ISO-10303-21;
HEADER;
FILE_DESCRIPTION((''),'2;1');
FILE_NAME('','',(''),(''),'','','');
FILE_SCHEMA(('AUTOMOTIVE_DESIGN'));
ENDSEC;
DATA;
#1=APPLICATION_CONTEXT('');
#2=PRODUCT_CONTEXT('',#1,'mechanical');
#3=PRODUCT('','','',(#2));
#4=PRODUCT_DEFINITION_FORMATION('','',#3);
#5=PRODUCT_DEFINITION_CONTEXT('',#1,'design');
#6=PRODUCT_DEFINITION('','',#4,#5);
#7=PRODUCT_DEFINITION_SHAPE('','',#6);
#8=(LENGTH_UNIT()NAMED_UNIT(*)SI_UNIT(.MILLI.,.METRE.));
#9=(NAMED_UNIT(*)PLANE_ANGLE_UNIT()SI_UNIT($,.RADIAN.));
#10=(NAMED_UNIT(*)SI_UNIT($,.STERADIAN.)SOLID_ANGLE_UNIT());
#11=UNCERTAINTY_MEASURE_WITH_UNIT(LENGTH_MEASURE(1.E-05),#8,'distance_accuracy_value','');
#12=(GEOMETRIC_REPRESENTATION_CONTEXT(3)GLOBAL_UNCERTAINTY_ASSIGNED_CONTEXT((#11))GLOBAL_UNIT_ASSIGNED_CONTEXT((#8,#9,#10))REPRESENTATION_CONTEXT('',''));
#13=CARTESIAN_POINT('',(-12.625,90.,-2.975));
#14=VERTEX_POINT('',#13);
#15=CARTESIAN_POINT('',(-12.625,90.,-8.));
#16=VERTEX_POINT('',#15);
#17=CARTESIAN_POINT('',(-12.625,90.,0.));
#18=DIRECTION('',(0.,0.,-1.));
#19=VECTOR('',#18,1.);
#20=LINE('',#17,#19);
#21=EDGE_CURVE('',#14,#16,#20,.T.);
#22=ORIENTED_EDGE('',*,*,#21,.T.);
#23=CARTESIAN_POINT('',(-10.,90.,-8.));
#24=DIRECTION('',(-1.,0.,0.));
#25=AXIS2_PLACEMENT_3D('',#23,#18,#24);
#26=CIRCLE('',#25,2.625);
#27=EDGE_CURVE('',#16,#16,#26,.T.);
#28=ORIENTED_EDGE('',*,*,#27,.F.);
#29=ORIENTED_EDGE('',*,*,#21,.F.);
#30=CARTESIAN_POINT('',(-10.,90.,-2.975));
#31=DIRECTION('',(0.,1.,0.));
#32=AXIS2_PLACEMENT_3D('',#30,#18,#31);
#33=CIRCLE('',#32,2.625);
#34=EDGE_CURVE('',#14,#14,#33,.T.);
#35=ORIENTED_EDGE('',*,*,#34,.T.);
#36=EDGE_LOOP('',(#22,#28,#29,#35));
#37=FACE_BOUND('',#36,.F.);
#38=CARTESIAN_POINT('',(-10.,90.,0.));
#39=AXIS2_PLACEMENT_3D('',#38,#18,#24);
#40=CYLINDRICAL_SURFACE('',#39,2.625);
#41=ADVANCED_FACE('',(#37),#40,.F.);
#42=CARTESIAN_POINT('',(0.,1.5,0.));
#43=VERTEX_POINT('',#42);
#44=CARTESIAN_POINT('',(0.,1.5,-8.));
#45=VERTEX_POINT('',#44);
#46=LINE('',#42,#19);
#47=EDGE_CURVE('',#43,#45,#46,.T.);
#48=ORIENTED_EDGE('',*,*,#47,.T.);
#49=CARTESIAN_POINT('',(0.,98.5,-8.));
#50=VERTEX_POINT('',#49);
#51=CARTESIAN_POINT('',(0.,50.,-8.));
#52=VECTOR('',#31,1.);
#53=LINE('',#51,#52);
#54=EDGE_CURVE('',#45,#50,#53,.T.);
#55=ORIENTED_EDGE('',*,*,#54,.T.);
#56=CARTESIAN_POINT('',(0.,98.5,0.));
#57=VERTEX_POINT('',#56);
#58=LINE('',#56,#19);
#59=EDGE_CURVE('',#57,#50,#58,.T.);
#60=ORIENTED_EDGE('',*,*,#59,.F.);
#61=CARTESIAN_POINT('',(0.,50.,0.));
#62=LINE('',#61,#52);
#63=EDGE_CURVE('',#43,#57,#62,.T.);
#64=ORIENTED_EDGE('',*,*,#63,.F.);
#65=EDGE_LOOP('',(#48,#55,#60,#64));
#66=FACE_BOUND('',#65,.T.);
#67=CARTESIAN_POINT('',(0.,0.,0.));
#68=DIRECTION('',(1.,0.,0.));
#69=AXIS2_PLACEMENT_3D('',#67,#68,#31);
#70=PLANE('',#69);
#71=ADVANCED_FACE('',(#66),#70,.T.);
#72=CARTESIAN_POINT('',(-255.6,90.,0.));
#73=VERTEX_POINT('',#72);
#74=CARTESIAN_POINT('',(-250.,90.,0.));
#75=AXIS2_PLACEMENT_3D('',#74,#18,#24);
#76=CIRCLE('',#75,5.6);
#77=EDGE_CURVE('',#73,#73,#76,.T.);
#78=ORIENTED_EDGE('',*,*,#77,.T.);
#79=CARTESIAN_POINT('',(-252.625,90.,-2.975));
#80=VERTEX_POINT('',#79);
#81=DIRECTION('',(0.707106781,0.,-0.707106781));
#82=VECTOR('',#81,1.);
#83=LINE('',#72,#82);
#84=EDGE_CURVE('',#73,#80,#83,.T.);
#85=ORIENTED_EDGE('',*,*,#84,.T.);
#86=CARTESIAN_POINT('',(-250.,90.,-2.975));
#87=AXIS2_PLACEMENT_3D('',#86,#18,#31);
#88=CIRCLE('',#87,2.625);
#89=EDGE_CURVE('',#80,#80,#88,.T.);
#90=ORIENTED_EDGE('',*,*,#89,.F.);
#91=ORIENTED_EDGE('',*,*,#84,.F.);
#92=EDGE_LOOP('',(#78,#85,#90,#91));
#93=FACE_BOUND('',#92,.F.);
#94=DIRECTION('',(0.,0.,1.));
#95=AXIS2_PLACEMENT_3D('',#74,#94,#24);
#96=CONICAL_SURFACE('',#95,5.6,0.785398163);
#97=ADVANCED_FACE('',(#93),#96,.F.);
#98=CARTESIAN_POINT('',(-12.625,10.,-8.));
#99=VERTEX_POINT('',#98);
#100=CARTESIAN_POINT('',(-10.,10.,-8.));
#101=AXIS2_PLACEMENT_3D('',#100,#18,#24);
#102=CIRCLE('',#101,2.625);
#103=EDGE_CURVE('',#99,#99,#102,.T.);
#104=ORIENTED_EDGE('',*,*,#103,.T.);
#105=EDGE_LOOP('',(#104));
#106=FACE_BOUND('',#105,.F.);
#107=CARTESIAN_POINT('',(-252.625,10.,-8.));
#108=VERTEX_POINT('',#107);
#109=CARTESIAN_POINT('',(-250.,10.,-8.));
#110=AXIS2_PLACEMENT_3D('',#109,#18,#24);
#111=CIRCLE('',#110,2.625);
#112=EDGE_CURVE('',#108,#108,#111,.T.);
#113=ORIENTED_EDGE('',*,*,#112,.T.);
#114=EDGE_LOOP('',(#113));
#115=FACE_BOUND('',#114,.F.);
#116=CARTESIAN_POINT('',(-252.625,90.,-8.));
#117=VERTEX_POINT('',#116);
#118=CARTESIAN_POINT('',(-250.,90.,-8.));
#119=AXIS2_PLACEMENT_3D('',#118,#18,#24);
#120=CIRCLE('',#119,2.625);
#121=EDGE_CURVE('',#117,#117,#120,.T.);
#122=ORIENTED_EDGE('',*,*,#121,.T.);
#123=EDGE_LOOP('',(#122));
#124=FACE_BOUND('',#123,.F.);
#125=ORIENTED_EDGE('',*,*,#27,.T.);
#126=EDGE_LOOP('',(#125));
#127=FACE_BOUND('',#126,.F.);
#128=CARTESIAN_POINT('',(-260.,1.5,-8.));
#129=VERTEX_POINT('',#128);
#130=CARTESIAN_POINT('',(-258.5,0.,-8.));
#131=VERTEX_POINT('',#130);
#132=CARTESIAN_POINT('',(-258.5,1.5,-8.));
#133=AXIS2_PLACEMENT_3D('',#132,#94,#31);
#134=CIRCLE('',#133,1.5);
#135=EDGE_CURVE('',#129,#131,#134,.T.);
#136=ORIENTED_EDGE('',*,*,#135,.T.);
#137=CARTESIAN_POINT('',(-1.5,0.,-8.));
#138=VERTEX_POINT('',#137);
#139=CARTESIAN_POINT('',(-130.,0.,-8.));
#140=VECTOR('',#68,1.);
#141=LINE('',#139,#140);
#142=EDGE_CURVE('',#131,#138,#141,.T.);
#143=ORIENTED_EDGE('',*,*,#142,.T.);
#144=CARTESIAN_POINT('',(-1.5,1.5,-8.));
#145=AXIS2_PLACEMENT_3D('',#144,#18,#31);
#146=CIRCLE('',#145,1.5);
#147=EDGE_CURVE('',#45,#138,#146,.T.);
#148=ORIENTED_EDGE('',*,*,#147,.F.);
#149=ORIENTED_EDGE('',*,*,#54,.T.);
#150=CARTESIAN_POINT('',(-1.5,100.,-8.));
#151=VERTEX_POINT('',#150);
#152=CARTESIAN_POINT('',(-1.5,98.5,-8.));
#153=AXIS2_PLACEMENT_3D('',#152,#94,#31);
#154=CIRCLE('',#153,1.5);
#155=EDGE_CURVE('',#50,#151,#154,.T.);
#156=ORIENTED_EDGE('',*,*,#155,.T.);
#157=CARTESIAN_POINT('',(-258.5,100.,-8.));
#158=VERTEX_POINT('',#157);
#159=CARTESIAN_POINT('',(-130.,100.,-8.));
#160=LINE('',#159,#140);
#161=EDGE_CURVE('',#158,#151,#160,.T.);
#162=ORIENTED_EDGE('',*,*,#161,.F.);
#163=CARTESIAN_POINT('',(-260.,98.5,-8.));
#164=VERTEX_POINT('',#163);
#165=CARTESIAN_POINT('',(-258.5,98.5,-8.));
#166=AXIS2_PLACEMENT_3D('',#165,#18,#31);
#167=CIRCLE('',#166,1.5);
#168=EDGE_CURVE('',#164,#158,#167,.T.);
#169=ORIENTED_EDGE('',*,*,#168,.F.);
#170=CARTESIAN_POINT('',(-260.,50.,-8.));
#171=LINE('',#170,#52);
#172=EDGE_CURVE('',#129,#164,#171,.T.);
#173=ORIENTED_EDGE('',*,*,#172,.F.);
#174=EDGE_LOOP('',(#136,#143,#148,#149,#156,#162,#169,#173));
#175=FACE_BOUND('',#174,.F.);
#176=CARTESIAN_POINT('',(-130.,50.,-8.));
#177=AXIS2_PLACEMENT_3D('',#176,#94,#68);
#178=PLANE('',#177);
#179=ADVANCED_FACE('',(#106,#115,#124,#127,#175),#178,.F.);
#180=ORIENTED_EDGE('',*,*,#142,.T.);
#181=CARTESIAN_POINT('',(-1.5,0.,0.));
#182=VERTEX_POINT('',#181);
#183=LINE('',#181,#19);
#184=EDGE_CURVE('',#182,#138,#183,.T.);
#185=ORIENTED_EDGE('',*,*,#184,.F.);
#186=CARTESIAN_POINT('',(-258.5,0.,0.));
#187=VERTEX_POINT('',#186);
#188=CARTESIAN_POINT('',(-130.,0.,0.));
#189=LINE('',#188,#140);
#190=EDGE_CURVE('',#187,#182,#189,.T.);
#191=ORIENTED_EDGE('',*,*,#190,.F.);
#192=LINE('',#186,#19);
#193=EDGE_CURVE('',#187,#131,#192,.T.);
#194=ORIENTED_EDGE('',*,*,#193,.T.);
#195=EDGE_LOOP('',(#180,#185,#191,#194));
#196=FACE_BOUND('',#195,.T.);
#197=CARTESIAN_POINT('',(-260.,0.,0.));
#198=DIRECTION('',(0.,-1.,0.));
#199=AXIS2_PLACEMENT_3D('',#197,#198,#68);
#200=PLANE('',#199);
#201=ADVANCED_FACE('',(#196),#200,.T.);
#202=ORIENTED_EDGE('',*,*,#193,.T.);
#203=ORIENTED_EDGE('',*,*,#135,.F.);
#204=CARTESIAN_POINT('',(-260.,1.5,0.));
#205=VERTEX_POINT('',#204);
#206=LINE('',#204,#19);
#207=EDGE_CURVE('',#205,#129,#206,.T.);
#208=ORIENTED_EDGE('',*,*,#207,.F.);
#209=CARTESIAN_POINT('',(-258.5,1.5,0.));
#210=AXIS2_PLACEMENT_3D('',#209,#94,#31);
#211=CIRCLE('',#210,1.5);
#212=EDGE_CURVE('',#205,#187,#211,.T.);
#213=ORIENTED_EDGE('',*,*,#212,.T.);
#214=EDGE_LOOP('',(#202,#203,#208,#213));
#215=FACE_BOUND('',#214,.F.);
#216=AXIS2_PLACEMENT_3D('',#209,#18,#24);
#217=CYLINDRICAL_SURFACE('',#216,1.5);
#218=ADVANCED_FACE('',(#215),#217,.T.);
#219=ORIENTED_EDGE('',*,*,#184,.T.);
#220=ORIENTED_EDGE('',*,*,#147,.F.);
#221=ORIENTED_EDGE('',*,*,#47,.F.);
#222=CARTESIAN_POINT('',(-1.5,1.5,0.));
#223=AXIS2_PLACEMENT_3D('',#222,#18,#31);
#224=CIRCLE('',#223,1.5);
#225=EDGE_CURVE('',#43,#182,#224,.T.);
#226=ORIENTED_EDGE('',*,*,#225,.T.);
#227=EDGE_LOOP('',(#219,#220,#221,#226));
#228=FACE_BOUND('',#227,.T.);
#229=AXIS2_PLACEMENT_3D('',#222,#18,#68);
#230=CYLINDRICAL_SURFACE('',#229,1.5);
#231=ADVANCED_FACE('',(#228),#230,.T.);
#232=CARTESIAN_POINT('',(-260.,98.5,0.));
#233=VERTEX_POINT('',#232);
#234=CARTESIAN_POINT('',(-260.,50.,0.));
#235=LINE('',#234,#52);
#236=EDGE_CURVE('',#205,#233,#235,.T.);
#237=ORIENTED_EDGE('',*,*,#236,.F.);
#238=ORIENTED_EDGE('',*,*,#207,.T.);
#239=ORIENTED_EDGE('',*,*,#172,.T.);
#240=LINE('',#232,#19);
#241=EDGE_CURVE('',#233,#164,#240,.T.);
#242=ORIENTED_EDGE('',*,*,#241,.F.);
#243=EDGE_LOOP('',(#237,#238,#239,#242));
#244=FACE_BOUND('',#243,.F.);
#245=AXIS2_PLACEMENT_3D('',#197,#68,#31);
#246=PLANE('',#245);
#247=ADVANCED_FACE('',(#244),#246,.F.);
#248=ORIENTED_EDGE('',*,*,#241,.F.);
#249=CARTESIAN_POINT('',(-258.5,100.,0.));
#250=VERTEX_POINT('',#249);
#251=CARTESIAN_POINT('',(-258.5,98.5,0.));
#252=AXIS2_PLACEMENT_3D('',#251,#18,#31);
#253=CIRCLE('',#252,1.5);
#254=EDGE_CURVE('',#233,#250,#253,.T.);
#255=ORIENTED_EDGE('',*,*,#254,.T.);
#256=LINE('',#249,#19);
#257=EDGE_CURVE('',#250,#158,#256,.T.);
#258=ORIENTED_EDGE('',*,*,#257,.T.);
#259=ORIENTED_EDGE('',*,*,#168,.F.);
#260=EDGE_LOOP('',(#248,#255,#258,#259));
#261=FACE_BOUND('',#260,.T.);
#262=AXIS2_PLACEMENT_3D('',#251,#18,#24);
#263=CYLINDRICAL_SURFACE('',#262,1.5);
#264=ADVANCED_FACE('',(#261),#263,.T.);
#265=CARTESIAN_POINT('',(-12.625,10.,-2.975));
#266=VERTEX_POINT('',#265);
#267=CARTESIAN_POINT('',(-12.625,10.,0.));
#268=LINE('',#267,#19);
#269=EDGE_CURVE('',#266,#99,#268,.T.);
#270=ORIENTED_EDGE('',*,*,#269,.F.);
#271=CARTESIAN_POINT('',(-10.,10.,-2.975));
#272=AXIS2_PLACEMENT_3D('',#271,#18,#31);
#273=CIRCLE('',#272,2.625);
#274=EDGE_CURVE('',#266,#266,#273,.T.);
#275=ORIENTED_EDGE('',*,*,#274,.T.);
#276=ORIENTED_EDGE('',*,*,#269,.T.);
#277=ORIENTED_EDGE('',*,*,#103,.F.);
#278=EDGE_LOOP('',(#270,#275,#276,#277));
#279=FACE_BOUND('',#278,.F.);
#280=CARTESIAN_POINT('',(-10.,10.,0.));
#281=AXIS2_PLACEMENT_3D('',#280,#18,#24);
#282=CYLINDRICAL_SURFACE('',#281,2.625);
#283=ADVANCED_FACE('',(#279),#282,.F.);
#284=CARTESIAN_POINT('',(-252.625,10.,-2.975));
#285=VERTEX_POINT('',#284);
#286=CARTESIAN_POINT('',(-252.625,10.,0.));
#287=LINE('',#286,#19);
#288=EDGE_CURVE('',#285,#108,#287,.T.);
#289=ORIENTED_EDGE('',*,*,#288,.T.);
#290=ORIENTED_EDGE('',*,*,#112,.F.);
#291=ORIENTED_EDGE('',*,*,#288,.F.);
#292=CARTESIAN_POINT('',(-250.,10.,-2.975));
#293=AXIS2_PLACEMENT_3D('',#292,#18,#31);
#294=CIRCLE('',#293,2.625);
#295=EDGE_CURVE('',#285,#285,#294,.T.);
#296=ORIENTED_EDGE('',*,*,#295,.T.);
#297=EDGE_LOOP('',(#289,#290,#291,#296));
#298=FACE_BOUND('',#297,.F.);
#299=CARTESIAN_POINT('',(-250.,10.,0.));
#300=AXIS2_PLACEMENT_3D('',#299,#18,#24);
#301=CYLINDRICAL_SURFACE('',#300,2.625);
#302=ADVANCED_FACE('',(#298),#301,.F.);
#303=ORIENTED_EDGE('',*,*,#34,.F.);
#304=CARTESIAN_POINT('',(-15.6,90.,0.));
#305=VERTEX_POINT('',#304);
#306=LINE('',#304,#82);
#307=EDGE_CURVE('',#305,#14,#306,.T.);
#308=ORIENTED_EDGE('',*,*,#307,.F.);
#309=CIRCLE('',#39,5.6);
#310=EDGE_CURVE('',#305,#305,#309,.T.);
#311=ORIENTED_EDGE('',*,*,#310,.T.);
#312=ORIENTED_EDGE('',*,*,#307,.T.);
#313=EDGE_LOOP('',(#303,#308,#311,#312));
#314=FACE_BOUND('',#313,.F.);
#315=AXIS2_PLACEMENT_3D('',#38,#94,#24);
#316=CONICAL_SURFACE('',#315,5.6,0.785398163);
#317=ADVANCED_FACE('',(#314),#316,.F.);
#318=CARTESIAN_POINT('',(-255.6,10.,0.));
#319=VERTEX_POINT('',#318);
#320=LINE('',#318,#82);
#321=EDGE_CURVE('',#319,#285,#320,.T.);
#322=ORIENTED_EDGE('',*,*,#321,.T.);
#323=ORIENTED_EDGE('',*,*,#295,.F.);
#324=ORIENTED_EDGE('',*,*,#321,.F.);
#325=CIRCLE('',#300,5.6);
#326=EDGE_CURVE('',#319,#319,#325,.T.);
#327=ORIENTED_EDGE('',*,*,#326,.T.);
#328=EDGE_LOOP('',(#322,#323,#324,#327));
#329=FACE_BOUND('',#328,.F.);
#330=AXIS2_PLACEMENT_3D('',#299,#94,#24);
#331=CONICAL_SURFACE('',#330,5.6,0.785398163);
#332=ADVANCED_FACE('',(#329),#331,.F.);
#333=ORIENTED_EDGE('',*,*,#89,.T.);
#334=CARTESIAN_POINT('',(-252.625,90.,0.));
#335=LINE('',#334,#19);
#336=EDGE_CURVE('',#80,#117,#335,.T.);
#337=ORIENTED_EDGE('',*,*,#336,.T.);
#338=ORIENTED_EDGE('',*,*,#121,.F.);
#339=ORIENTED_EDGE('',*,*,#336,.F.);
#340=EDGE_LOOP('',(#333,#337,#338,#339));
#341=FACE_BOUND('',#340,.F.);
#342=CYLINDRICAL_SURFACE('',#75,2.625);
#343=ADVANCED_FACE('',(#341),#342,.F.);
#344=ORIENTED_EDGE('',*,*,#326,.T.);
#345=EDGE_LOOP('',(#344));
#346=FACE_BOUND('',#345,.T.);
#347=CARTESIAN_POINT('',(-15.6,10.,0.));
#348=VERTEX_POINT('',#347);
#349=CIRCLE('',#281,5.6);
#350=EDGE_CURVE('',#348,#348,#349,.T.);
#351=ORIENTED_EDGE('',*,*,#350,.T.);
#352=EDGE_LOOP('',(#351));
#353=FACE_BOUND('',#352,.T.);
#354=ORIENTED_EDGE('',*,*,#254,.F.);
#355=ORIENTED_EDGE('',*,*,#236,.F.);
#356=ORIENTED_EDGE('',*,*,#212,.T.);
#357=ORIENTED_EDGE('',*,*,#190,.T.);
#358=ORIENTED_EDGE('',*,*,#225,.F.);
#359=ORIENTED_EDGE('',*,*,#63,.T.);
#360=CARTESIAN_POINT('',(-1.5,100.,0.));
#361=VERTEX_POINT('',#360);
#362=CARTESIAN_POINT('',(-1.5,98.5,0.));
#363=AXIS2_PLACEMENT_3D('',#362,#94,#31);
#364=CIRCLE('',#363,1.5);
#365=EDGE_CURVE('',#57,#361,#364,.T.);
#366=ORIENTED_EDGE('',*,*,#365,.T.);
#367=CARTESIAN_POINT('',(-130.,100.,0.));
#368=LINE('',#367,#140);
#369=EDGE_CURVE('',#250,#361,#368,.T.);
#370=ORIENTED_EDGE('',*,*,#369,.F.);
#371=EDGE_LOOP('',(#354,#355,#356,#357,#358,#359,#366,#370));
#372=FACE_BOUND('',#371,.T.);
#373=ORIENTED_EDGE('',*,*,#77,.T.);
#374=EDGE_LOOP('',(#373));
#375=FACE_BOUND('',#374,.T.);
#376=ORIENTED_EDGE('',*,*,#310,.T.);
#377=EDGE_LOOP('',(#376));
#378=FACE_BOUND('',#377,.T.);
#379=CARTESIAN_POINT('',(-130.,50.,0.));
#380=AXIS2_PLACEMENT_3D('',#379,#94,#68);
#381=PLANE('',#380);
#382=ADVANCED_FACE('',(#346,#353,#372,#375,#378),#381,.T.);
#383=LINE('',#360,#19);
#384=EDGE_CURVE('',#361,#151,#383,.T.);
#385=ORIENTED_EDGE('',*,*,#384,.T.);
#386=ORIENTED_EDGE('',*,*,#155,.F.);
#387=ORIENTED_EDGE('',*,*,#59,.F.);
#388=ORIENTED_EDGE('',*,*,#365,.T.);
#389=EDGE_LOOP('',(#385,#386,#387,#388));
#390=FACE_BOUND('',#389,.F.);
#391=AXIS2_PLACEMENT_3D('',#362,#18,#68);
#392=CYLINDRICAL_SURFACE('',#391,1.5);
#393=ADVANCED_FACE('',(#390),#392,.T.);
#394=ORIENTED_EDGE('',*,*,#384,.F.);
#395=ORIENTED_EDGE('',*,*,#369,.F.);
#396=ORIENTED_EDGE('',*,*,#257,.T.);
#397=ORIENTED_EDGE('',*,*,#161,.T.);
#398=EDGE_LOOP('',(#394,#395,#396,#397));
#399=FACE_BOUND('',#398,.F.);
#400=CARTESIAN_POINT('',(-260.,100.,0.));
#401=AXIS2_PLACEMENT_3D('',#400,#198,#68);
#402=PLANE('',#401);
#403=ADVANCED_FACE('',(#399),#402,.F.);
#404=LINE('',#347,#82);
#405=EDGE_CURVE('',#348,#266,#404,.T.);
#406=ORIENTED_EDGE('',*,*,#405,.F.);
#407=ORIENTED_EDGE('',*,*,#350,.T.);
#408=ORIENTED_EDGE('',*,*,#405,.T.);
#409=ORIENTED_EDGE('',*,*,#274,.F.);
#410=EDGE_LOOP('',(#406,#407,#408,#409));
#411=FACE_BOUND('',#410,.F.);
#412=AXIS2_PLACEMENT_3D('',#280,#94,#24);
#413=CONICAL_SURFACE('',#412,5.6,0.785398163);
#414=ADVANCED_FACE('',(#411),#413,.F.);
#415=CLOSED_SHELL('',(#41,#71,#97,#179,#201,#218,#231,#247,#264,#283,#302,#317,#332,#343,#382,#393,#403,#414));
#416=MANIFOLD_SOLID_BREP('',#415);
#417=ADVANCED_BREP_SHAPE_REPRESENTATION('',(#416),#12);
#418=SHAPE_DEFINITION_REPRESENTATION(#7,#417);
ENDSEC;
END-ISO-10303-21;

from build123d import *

# Parameters (mm, degrees)
F0_W           = 260
F0_H           = 100
F1_DEPTH       = 8
F2_D           = 5.25
F2_CSINK_D     = 11.2
F2_CSINK_ANGLE = 90
F3_R           = 1.5


# Not quite as in the source:
# - a feature names something its author has since deleted; it is built from what else it names


with BuildPart() as f1:
    # F0 (on Top) → F1 (new body)
    with BuildSketch(Plane.XY):
        with Locations((-130, 50)):
            Rectangle(F0_W, F0_H)
    extrude(amount=-F1_DEPTH)

    # F2 (through all)
    with Locations(Plane.XY):
        with Locations((-250, 10), (-10, 10), (-10, 90), (-250, 90)):
            CounterSinkHole(F2_D / 2, F2_CSINK_D / 2, counter_sink_angle=F2_CSINK_ANGLE)

    # F3
    f3_edges = [f1.edges().sort_by_distance(p)[0] for p in [
        (0, 0, -4),
        (0, 100, -4),
        (-260, 0, -4),
        (-260, 100, -4),
    ]]
    fillet(f3_edges, radius=F3_R)


solid = f1.part
